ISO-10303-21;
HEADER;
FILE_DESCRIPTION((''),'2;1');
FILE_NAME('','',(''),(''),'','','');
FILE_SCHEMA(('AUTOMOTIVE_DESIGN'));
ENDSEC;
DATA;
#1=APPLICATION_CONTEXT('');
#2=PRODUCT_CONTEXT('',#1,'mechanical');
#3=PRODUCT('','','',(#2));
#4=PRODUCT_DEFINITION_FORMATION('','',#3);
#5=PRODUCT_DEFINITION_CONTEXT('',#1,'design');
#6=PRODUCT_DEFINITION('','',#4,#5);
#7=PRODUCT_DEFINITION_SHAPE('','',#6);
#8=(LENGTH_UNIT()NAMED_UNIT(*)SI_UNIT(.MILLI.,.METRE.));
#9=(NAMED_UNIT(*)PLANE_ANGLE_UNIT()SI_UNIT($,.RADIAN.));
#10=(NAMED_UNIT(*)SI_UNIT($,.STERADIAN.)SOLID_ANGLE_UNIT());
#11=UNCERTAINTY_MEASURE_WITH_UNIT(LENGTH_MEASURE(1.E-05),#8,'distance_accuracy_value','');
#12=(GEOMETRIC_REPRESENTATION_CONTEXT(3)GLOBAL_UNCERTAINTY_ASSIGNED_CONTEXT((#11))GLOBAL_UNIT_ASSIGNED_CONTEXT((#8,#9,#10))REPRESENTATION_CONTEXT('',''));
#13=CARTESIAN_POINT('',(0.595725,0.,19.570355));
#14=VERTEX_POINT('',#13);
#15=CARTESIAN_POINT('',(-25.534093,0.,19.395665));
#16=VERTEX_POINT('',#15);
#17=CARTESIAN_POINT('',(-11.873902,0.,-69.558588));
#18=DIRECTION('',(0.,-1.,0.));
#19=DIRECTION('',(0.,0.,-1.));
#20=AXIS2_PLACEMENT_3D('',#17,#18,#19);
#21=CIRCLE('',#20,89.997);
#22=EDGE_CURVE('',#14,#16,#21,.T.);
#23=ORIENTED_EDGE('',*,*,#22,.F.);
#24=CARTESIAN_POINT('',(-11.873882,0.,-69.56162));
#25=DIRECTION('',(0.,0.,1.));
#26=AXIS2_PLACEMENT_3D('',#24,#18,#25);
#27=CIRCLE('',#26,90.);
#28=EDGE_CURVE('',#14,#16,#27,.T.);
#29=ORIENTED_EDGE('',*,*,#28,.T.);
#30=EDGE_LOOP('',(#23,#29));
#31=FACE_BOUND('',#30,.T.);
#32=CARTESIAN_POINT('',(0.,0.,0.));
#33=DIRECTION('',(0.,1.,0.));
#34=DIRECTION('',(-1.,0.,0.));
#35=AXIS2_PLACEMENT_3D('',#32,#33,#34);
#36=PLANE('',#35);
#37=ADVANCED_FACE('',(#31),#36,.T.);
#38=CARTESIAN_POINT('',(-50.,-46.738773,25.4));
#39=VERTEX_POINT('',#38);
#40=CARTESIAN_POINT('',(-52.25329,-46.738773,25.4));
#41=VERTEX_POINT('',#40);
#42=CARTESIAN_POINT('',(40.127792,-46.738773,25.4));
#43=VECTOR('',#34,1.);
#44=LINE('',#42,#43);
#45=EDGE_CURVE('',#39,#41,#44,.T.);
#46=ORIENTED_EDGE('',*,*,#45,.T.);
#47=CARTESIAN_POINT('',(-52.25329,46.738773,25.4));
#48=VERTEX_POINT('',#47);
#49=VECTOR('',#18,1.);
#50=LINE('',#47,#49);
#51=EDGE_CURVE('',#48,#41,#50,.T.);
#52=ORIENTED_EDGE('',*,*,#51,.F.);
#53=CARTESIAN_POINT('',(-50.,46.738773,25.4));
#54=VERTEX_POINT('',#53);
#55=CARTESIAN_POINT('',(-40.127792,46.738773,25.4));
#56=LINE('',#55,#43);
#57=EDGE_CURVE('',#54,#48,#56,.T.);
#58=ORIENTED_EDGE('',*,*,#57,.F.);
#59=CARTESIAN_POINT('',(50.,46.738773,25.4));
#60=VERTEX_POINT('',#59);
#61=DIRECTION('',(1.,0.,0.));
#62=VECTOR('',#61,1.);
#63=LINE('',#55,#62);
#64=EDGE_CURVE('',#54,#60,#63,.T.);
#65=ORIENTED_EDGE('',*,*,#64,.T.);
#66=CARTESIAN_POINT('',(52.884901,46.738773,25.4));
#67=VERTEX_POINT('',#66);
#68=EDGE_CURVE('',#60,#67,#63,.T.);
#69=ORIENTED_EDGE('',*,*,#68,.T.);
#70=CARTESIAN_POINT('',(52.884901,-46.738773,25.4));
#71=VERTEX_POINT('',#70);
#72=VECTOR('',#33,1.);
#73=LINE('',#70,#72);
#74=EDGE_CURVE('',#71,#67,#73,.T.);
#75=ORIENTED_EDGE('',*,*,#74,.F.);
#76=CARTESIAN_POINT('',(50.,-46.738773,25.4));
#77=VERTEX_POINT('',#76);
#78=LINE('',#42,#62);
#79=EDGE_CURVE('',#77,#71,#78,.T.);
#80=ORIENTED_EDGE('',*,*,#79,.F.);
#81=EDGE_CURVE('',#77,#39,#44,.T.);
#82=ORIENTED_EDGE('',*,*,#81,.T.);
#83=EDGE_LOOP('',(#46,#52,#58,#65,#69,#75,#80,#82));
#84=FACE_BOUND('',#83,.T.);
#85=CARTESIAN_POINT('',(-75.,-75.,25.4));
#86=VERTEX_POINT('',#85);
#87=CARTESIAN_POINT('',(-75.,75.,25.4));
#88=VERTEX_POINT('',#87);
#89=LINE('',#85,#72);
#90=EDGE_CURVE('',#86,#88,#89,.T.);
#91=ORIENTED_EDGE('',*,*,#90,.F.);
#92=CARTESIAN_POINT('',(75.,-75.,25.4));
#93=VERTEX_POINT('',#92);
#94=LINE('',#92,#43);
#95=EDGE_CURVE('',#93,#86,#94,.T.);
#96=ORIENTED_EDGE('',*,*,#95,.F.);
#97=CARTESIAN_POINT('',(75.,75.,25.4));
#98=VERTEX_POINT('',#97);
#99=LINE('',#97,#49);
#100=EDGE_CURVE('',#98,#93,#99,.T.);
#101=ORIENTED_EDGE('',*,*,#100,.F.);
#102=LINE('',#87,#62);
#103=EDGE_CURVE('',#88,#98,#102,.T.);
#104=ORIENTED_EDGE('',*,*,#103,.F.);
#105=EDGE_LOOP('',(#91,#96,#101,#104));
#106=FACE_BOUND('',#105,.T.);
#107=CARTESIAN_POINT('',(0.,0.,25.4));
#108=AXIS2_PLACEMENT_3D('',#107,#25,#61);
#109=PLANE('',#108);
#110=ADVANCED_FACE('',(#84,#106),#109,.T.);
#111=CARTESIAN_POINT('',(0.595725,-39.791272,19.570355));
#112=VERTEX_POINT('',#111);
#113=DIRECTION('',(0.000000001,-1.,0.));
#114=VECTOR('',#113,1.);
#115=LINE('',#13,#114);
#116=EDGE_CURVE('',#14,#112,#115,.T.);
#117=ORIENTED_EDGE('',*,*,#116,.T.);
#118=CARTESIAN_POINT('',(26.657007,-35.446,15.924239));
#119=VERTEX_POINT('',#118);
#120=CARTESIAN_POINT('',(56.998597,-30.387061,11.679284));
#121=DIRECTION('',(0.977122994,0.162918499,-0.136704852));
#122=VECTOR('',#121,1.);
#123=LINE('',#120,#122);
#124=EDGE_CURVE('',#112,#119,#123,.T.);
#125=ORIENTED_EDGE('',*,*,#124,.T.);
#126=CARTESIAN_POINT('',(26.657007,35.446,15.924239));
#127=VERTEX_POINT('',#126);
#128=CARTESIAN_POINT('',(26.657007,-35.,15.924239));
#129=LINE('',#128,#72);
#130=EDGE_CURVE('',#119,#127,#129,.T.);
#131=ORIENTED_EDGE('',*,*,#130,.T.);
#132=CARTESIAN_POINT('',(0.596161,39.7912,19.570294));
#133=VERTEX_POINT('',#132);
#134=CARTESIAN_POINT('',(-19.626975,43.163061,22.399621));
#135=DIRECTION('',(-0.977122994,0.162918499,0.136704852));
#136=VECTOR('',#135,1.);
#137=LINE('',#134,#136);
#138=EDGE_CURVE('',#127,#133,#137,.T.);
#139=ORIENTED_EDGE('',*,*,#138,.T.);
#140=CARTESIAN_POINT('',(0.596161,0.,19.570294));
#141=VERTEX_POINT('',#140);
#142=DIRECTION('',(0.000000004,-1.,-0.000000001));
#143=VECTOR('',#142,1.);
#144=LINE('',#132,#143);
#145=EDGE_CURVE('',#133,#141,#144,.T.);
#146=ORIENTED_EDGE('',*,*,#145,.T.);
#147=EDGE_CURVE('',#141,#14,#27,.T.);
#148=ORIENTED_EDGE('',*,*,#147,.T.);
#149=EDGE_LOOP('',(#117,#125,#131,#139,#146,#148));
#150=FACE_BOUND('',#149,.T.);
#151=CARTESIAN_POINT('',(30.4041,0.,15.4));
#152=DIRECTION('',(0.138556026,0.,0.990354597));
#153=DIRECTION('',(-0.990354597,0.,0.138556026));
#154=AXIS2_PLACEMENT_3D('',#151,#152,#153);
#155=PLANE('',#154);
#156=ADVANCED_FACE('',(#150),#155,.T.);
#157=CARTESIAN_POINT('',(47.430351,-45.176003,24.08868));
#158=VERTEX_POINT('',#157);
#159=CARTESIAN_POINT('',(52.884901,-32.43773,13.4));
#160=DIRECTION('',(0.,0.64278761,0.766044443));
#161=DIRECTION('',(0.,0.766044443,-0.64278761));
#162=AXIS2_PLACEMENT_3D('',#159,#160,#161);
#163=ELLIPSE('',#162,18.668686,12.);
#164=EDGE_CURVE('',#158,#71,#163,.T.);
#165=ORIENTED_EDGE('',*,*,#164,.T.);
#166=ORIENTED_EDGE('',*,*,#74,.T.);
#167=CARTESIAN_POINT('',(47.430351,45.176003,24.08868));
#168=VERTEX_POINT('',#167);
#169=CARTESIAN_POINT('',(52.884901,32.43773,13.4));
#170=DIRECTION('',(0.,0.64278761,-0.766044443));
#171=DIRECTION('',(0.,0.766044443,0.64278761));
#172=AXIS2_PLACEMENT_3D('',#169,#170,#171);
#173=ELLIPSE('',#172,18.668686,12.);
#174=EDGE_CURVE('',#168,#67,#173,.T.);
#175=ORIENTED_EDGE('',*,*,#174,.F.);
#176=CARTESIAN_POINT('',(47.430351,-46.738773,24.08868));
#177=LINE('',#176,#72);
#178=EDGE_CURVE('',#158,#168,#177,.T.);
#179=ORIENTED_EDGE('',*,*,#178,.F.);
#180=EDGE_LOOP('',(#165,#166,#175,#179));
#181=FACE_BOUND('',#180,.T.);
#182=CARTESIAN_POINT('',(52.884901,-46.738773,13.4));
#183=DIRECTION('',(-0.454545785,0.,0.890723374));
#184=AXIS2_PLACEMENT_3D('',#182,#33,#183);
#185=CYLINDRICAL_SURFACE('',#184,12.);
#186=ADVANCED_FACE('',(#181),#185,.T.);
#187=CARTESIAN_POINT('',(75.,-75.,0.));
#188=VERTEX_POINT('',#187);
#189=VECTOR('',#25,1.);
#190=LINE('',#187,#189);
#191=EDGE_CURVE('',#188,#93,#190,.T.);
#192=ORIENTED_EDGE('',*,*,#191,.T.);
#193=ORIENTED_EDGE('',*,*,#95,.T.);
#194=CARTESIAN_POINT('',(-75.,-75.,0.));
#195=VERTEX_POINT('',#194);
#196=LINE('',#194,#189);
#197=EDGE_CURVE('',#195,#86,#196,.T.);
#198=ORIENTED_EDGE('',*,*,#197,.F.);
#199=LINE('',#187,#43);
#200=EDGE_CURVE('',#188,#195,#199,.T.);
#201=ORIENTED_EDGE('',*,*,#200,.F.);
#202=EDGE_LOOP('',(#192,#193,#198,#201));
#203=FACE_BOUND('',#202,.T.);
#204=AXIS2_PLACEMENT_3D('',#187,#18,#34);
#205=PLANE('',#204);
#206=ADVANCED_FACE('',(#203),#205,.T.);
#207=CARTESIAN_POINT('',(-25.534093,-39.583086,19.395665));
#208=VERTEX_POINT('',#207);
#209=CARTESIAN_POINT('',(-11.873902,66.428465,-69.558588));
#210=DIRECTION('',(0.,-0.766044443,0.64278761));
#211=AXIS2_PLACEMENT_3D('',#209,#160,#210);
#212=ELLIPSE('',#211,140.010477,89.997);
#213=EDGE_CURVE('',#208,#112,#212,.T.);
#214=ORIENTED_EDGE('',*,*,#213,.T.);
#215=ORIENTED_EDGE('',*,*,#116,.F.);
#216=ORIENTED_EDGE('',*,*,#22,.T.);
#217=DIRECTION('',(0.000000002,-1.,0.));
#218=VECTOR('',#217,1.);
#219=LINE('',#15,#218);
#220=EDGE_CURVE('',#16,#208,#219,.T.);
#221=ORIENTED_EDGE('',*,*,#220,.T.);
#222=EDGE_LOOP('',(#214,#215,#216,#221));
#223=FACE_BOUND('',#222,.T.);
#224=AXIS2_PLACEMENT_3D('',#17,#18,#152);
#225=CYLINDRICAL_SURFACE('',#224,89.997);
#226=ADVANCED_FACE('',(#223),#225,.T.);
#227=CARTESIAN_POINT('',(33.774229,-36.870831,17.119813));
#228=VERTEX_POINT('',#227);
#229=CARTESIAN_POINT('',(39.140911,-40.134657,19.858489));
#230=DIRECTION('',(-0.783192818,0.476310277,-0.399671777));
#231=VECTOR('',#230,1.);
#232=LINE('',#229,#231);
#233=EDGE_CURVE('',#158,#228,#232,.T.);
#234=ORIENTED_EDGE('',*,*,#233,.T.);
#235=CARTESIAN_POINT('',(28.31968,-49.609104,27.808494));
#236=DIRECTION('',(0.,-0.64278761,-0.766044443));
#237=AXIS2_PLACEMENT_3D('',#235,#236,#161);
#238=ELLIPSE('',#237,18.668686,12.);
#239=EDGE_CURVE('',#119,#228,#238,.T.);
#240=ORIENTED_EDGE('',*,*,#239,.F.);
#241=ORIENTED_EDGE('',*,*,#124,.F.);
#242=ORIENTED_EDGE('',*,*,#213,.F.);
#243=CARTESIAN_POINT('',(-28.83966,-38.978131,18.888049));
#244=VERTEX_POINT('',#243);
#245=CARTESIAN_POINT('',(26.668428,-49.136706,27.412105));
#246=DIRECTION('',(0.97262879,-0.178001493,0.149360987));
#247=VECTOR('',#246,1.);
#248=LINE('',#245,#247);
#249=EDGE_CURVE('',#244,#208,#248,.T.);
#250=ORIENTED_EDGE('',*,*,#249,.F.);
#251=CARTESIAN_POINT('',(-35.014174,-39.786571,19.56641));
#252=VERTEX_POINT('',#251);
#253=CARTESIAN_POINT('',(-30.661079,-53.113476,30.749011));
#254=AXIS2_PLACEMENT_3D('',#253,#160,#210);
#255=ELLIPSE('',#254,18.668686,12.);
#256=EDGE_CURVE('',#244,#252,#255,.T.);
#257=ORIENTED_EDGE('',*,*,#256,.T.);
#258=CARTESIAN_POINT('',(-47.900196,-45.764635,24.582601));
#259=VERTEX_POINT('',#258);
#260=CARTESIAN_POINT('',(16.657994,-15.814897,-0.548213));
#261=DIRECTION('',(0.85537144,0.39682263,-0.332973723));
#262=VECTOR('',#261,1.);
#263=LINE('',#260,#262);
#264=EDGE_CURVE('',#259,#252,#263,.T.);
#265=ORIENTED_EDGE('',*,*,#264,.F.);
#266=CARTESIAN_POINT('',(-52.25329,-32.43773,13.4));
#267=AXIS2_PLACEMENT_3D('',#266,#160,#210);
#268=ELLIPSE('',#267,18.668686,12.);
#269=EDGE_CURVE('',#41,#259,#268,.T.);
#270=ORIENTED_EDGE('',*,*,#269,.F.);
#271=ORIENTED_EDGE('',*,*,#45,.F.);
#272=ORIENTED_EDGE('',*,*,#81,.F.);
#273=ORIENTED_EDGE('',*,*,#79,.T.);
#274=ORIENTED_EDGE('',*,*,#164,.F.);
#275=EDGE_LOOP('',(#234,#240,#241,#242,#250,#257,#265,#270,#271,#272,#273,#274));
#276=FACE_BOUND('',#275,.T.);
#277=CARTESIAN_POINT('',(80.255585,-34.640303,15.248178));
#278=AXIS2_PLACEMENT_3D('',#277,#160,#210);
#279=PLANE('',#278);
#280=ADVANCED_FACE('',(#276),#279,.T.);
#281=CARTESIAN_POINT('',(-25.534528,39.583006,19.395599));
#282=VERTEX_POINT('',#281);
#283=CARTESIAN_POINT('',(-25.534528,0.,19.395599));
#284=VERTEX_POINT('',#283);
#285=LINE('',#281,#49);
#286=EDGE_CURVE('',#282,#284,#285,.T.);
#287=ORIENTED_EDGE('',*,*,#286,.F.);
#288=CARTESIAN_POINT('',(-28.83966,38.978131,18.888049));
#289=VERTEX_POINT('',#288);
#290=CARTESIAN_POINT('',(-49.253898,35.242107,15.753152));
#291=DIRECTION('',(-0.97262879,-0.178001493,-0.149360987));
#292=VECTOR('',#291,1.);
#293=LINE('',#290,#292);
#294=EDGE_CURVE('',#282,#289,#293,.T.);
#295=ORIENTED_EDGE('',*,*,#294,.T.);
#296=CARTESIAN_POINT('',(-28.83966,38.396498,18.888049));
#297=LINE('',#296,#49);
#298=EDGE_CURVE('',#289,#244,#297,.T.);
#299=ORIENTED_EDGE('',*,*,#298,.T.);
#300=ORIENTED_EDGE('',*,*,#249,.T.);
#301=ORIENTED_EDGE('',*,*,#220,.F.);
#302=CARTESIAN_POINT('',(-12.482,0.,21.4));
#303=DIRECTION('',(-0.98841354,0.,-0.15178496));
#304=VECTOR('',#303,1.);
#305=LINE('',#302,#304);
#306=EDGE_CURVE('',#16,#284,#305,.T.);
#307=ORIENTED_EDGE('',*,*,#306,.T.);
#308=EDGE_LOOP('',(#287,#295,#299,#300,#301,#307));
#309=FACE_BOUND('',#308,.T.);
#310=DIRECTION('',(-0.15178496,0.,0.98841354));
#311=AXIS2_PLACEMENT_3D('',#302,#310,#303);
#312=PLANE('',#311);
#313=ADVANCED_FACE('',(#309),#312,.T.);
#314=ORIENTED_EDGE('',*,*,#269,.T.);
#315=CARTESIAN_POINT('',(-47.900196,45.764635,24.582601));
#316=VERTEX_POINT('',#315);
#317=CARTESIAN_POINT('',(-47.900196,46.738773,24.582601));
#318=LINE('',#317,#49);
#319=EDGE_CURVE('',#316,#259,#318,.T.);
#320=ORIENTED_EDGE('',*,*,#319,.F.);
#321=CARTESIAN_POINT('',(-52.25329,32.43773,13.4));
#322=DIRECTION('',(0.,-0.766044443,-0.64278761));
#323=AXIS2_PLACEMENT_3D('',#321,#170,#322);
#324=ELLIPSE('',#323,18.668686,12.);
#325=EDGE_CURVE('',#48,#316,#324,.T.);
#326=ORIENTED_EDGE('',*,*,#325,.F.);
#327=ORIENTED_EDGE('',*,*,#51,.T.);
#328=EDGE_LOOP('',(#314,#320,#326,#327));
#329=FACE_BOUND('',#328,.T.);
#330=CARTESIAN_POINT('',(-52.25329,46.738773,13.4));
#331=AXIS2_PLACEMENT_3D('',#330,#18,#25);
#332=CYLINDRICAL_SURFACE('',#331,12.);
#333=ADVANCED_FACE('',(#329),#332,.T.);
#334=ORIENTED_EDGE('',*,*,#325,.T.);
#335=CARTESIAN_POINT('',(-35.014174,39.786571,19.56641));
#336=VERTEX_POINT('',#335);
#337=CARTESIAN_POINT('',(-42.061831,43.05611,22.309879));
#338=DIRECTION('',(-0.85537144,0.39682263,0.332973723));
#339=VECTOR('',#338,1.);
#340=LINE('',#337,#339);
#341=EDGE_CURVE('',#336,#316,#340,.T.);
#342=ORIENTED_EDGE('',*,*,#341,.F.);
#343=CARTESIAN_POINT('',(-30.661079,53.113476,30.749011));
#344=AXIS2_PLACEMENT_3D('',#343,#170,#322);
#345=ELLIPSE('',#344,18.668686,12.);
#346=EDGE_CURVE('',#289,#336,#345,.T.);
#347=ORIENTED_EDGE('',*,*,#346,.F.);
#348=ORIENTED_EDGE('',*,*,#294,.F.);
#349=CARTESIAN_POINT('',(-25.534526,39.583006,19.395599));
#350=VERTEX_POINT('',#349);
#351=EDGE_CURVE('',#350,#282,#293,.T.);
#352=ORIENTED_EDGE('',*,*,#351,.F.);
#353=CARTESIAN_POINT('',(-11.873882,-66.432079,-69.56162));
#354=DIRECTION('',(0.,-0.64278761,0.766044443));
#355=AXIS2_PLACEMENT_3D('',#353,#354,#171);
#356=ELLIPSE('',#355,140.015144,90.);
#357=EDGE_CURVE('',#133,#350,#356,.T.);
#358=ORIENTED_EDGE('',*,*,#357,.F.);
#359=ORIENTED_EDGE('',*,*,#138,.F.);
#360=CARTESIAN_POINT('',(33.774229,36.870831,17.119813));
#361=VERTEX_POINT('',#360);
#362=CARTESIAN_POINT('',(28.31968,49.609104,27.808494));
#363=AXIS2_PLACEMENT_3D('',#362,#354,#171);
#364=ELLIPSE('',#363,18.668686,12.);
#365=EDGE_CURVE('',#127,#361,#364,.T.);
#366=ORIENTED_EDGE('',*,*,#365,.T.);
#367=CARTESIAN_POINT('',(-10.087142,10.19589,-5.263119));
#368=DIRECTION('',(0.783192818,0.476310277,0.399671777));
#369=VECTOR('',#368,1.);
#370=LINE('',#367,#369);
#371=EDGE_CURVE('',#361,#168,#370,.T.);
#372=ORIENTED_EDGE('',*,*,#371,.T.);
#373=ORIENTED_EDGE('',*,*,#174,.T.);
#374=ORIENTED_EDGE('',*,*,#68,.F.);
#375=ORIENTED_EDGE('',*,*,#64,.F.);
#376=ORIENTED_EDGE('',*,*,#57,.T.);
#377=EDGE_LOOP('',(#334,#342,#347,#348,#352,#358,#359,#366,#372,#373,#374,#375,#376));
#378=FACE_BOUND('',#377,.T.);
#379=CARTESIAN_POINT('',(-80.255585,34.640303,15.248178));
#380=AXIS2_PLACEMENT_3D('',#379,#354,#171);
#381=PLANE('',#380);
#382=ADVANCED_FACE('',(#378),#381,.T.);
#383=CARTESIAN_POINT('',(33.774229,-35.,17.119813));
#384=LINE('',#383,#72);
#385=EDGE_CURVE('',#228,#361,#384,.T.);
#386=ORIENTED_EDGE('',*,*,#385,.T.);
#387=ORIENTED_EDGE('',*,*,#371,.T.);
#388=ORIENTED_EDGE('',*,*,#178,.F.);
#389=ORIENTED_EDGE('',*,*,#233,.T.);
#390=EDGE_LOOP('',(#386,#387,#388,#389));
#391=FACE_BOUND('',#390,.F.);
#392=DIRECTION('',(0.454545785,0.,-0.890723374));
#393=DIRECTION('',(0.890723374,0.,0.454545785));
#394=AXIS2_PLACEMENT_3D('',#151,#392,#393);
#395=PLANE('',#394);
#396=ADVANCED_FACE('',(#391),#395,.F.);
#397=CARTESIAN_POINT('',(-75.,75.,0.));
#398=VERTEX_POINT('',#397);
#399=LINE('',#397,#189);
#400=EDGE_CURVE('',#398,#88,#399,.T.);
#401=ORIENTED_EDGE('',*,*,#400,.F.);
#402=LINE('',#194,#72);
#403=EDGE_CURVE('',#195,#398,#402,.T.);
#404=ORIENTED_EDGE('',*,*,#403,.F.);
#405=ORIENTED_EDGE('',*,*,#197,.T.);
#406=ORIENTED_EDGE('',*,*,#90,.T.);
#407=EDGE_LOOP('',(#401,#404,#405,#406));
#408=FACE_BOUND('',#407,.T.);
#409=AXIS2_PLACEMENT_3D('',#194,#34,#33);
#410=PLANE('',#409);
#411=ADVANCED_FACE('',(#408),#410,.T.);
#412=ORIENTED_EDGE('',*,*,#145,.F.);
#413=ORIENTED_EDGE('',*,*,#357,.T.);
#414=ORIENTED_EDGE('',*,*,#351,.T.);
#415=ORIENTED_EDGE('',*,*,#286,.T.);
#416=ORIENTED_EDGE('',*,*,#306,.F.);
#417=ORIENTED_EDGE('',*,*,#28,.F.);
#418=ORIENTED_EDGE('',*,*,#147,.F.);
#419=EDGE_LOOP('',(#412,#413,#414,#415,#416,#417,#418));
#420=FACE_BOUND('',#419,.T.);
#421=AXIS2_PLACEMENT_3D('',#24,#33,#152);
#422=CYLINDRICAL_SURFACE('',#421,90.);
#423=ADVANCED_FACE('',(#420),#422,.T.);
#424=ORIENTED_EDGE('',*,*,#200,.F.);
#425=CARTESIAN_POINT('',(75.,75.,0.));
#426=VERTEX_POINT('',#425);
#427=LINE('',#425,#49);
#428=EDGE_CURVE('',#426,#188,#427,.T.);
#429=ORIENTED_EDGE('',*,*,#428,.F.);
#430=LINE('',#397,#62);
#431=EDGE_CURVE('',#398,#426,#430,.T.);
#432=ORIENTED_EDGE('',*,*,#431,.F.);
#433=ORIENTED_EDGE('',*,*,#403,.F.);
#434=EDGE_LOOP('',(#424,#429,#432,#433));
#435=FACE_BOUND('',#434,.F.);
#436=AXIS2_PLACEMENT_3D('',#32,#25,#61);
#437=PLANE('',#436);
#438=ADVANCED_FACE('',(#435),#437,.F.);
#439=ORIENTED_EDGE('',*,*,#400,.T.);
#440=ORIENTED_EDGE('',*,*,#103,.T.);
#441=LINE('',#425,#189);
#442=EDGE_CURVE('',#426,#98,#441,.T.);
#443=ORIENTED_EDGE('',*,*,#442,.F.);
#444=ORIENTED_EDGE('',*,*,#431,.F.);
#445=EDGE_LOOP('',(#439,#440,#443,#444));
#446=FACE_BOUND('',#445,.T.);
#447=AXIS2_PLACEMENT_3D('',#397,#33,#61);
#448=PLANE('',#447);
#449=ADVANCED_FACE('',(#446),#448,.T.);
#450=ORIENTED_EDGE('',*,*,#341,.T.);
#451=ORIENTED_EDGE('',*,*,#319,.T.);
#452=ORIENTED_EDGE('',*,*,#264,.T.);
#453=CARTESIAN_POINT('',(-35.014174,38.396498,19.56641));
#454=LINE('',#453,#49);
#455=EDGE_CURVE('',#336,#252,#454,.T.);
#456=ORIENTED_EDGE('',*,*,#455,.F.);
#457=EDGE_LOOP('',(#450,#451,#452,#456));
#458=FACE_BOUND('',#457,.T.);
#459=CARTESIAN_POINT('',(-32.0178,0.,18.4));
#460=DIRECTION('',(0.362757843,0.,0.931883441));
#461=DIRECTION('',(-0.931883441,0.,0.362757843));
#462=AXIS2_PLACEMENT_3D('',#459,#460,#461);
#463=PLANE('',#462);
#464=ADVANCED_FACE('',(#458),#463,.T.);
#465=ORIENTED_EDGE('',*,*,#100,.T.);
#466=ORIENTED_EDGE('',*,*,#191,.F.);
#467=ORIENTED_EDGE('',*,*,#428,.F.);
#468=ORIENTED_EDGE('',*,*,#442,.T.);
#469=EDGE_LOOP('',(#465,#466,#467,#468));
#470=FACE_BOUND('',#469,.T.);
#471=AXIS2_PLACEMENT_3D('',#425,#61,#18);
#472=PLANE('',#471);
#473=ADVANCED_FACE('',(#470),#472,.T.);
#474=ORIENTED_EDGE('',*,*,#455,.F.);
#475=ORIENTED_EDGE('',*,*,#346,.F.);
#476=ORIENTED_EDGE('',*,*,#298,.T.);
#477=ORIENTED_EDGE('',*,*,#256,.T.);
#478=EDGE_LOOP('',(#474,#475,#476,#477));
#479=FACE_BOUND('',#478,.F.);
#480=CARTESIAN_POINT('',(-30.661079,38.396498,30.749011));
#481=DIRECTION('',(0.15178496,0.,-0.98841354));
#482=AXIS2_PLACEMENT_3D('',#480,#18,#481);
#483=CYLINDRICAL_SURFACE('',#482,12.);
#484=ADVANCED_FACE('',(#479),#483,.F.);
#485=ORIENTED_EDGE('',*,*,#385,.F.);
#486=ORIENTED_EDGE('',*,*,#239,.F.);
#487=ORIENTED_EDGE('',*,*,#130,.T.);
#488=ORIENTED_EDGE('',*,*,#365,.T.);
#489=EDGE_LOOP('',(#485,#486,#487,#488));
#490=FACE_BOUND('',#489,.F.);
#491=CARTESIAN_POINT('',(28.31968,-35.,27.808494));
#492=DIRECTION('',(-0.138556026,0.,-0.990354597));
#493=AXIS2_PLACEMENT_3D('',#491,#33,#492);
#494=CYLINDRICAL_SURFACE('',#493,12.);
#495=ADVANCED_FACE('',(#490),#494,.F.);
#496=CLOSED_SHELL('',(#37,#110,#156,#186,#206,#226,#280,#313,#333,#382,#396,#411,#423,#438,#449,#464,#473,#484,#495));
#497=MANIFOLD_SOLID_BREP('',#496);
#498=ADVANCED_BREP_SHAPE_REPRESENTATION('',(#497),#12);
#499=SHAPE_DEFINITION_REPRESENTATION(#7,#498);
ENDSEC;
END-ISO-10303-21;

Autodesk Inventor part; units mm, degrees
sketch "Boceto1" plane through (0, 0, 0) normal (0, 0, 1) x (1, 0, 0)
  line L0 (-75, 75) -> (75, 75)
  line L1 (75, 75) -> (75, -75)
  line L2 (75, -75) -> (-75, -75)
  line L3 (-75, -75) -> (-75, 75)
  line L4 (-75, 75) -> (75, -75) construction
  line L5 (75, 75) -> (-75, -75) construction
  point P0 (0, 0)
  dimension "d0" = 150
  dimension "d1" = 150
extrude "Extrusión1" add sketch "Boceto1" along normal blind 25.4
sketch "Boceto2" plane through (0, 0, 0) normal (0, 1, 0) x (-1, 0, 0)
  line L0 (-75, 25.4) -> (75, 25.4) projected
  line L1 (0, 25.4) -> (-45.0693, 25.4)
  line L2 (-45.0693, 25.4) -> (-30.9272, 25.4) construction
  line L3 (-30.4041, 15.4) -> (12.482, 21.4)
  line L4 (12.482, 21.4) -> (32.0178, 18.4)
  line L5 (0, 25.4) -> (45.9037, 25.4)
  line L6 (-30.4041, 15.4) -> (-50, 25.4)
  line L7 (-45.0693, 25.4) -> (-50, 25.4)
  line L8 (-75, 0) -> (-75, 25.4) projected
  line L9 (32.0178, 18.4) -> (50, 25.4)
  line L10 (50, 25.4) -> (45.9037, 25.4)
  line L11 (75, 0) -> (75, 25.4) projected
  point P0 (0, 0)
  dimension "d33" = 4
  dimension "d34" = 7
  dimension "d35" = 10
  dimension "d36" = 22
  dimension "d41" = 150
  dimension "d42" = 145
  dimension "d45" = 100
  dimension "d46" = 25
  dimension "d47" = 25
extrude "Extrusión2" cut sketch "Boceto2" along normal blind 35
fillet "Empalme2" radius 90 1 edges at (-12.482, 17.5, 21.4)
chamfer "Chaflán1" distance 9.85 angle 50 1 edges at (0, 35, 25.4)
mirror "Simetría1" about plane through (0, 0, 0) normal (0, 1, 0) of "Extrusión2", "Empalme2", "Chaflán1"
fillet "Empalme15" radius 12 2 edges at (-32.0178, 0, 18.4) (30.4041, 0, 15.4)
fillet "Empalme16" radius 12 2 edges at (-50, 0, 25.4) (50, 0, 25.4)
properties part number "Placa - Abrasión punto Silla"
